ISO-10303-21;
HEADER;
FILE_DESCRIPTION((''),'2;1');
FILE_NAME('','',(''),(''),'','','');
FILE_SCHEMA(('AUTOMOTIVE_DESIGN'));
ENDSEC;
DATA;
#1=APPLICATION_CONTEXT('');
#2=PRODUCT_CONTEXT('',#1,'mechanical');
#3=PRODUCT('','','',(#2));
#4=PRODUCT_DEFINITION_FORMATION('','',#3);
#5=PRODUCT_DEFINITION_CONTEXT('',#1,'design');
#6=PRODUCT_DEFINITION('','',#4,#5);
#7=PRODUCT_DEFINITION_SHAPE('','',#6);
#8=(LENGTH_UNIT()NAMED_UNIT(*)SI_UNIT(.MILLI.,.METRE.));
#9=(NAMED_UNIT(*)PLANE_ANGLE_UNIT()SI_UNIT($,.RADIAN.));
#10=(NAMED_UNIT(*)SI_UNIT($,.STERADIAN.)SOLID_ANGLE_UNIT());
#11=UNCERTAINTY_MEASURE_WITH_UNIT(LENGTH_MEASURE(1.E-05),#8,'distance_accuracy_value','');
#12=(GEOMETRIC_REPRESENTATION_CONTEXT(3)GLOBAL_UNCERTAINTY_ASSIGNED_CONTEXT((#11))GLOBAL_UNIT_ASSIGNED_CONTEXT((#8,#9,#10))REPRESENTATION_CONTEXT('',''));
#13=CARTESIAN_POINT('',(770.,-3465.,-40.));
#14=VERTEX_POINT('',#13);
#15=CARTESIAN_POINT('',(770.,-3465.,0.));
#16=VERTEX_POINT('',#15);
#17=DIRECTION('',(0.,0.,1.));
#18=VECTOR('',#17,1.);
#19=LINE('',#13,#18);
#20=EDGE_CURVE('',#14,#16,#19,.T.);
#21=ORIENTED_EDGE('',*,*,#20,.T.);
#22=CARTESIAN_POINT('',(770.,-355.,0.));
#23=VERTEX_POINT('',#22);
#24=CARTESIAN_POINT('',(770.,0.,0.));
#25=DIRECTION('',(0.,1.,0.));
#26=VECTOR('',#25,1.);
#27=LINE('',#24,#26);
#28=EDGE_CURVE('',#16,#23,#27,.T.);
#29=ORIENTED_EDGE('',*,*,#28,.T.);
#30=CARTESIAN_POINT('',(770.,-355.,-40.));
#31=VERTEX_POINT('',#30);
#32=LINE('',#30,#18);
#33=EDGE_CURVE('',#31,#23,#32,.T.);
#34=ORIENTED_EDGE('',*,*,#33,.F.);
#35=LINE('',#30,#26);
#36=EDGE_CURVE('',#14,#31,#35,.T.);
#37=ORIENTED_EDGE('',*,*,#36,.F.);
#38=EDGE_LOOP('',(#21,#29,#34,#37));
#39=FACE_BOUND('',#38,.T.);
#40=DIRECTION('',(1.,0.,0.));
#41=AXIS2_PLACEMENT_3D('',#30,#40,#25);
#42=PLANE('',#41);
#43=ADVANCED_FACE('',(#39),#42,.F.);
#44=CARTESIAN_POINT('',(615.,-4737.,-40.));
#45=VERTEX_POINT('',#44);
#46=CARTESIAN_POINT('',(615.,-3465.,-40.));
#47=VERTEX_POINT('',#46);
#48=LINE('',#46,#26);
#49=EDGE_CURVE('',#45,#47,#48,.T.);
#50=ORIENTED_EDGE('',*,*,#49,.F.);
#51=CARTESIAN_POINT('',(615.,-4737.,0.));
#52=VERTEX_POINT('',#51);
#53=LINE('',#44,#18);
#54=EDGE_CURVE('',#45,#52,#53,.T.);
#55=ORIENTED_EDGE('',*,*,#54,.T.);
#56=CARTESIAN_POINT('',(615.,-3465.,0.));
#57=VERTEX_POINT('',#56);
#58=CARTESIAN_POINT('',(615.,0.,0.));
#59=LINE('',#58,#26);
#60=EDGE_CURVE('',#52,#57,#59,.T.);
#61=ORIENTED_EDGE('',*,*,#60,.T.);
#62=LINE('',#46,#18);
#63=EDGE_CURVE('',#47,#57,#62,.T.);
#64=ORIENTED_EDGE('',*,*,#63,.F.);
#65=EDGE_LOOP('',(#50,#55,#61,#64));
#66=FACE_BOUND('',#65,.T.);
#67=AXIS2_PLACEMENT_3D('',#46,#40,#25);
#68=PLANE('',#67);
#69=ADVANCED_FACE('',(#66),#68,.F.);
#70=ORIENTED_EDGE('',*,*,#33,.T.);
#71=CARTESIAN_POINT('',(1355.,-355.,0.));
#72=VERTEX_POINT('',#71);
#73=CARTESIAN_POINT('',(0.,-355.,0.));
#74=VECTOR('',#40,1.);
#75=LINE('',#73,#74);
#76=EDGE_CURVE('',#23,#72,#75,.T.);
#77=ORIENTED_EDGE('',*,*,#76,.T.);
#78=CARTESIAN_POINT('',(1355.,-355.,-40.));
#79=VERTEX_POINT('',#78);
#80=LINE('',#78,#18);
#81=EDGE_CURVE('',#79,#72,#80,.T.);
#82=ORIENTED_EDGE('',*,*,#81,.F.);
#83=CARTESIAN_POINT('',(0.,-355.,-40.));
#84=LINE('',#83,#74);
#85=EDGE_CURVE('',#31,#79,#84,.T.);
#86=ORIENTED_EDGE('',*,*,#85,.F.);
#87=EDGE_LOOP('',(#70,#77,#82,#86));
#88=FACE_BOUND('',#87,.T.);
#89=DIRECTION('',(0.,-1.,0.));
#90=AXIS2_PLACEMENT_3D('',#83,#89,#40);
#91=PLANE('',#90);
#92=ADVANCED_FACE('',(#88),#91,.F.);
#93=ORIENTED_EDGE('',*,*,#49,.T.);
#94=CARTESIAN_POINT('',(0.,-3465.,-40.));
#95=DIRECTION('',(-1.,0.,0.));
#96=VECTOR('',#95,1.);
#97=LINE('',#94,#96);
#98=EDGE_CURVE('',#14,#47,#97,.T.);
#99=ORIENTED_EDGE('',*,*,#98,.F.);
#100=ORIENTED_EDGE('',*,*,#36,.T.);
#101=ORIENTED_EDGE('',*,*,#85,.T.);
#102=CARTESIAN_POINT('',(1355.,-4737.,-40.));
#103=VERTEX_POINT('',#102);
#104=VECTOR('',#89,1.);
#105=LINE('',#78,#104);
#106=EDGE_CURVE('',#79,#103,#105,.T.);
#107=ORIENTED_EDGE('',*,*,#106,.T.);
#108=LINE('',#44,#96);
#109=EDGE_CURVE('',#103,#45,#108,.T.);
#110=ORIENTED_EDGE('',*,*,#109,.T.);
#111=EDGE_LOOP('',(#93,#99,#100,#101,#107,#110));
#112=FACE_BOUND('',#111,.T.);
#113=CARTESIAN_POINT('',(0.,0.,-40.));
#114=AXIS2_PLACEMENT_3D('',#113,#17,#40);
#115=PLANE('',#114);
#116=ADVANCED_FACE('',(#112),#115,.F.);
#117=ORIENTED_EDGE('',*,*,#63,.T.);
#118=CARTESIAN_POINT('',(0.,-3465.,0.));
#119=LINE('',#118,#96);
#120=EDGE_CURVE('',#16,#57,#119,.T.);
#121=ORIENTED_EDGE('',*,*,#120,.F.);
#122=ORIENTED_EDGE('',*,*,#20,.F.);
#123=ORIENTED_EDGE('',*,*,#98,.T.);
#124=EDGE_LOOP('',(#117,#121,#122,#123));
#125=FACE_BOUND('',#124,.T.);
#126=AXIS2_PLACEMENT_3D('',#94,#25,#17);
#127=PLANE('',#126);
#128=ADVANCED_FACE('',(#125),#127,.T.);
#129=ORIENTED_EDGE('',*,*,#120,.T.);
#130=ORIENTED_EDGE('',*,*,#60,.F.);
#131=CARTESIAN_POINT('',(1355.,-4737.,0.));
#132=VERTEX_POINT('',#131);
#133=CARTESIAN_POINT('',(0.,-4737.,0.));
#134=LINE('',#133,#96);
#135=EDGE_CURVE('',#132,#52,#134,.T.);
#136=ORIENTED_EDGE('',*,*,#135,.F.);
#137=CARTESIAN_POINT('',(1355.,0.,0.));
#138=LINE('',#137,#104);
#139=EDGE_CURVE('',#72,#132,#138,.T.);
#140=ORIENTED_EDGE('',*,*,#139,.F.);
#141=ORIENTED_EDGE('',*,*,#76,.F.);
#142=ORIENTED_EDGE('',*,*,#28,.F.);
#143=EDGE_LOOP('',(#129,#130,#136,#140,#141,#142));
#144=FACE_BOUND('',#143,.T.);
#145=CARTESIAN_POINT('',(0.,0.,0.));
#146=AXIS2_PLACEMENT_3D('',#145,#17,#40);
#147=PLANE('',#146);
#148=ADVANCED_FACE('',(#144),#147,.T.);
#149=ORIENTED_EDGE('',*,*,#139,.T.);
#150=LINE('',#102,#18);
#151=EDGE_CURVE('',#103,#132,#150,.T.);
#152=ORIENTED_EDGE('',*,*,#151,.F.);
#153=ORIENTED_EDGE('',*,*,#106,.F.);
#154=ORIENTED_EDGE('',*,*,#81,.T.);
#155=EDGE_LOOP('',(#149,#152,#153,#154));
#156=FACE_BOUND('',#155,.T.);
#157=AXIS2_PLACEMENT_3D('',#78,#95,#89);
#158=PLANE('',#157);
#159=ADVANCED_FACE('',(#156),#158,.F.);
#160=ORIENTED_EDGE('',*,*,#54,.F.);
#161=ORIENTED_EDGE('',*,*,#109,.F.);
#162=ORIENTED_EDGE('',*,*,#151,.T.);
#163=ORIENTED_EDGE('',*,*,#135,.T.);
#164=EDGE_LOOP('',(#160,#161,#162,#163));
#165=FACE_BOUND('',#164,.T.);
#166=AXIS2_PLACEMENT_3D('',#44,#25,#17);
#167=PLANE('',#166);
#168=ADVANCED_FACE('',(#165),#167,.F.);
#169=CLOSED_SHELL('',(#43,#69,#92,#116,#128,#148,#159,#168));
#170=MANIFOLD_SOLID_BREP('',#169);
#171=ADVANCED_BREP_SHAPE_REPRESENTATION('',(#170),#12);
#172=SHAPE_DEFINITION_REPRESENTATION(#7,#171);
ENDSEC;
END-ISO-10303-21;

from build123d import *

# Parameters (mm, degrees)
TABAN_FLAN_1_DEPTH         = 40
KES_EKSTR_ZYON1_DEPTH      = 6158.209189235
KES_EKSTR_ZYON1_DEPTH_BACK = 6158.209189235
IZIM2_W                    = 1360
IZIM2_H                    = 355
KES_EKSTR_ZYON2_DEPTH      = 6158.209189235
KES_EKSTR_ZYON2_DEPTH_BACK = 6158.209189235
IZIM3_W                    = 365
IZIM3_H                    = 3110
IZIM3_W_2                  = 5
IZIM3_H_2                  = 5650
KES_EKSTR_ZYON3_DEPTH      = 6157.106724221
KES_EKSTR_ZYON3_DEPTH_BACK = 6157.106724221
IZIM4_W                    = 405
IZIM4_H                    = 3110
KES_EKSTR_ZYON4_DEPTH      = 6157.106724221
KES_EKSTR_ZYON4_DEPTH_BACK = 6157.106724221


# Sheet-metal steps are written as plain solids
with BuildPart() as part:
    # Çizim1 → Taban-Flanş1 (new body)
    with BuildSketch(Plane.XY):
        Polygon((0, 0), (0, -3465), (-660, -3465), (-660, -6005), (1360, -6005), (1360, 0), align=None)
    extrude(amount=-TABAN_FLAN_1_DEPTH)

    # Çizim2 → Kes-Ekstrüzyon1 (cut, two sides: drawn at the far end of the back side and taken through both)
    with BuildSketch(Plane.XY.offset(-KES_EKSTR_ZYON1_DEPTH_BACK)):
        with Locations((680, -177.5)):
            Rectangle(IZIM2_W, IZIM2_H)
    extrude(amount=KES_EKSTR_ZYON1_DEPTH + KES_EKSTR_ZYON1_DEPTH_BACK, mode=Mode.SUBTRACT)

    # Çizim3 → Kes-Ekstrüzyon2 (cut, two sides: drawn at the far end of the back side and taken through both)
    with BuildSketch(Plane.XY.offset(-KES_EKSTR_ZYON2_DEPTH_BACK)):
        with Locations((182.5, -1910)):
            Rectangle(IZIM3_W, IZIM3_H)
        with Locations((1357.5, -3180)):
            Rectangle(IZIM3_W_2, IZIM3_H_2)
    extrude(amount=KES_EKSTR_ZYON2_DEPTH + KES_EKSTR_ZYON2_DEPTH_BACK, mode=Mode.SUBTRACT)

    # Çizim4 → Kes-Ekstrüzyon3 (cut, two sides: drawn at the far end of the back side and taken through both)
    with BuildSketch(Plane.XY.offset(-KES_EKSTR_ZYON3_DEPTH_BACK)):
        with Locations((567.5, -1910)):
            Rectangle(IZIM4_W, IZIM4_H)
    extrude(amount=KES_EKSTR_ZYON3_DEPTH + KES_EKSTR_ZYON3_DEPTH_BACK, mode=Mode.SUBTRACT)

    # Çizim5 → Kes-Ekstrüzyon4 (cut, two sides: drawn at the far end of the back side and taken through both)
    with BuildSketch(Plane.XY.offset(-KES_EKSTR_ZYON4_DEPTH_BACK)):
        Polygon((615, -3465), (615, -4737), (1355, -4737), (1355, -6005), (-660, -6005), (-660, -3465), align=None)
    extrude(amount=KES_EKSTR_ZYON4_DEPTH + KES_EKSTR_ZYON4_DEPTH_BACK, mode=Mode.SUBTRACT)


solid = part.part
